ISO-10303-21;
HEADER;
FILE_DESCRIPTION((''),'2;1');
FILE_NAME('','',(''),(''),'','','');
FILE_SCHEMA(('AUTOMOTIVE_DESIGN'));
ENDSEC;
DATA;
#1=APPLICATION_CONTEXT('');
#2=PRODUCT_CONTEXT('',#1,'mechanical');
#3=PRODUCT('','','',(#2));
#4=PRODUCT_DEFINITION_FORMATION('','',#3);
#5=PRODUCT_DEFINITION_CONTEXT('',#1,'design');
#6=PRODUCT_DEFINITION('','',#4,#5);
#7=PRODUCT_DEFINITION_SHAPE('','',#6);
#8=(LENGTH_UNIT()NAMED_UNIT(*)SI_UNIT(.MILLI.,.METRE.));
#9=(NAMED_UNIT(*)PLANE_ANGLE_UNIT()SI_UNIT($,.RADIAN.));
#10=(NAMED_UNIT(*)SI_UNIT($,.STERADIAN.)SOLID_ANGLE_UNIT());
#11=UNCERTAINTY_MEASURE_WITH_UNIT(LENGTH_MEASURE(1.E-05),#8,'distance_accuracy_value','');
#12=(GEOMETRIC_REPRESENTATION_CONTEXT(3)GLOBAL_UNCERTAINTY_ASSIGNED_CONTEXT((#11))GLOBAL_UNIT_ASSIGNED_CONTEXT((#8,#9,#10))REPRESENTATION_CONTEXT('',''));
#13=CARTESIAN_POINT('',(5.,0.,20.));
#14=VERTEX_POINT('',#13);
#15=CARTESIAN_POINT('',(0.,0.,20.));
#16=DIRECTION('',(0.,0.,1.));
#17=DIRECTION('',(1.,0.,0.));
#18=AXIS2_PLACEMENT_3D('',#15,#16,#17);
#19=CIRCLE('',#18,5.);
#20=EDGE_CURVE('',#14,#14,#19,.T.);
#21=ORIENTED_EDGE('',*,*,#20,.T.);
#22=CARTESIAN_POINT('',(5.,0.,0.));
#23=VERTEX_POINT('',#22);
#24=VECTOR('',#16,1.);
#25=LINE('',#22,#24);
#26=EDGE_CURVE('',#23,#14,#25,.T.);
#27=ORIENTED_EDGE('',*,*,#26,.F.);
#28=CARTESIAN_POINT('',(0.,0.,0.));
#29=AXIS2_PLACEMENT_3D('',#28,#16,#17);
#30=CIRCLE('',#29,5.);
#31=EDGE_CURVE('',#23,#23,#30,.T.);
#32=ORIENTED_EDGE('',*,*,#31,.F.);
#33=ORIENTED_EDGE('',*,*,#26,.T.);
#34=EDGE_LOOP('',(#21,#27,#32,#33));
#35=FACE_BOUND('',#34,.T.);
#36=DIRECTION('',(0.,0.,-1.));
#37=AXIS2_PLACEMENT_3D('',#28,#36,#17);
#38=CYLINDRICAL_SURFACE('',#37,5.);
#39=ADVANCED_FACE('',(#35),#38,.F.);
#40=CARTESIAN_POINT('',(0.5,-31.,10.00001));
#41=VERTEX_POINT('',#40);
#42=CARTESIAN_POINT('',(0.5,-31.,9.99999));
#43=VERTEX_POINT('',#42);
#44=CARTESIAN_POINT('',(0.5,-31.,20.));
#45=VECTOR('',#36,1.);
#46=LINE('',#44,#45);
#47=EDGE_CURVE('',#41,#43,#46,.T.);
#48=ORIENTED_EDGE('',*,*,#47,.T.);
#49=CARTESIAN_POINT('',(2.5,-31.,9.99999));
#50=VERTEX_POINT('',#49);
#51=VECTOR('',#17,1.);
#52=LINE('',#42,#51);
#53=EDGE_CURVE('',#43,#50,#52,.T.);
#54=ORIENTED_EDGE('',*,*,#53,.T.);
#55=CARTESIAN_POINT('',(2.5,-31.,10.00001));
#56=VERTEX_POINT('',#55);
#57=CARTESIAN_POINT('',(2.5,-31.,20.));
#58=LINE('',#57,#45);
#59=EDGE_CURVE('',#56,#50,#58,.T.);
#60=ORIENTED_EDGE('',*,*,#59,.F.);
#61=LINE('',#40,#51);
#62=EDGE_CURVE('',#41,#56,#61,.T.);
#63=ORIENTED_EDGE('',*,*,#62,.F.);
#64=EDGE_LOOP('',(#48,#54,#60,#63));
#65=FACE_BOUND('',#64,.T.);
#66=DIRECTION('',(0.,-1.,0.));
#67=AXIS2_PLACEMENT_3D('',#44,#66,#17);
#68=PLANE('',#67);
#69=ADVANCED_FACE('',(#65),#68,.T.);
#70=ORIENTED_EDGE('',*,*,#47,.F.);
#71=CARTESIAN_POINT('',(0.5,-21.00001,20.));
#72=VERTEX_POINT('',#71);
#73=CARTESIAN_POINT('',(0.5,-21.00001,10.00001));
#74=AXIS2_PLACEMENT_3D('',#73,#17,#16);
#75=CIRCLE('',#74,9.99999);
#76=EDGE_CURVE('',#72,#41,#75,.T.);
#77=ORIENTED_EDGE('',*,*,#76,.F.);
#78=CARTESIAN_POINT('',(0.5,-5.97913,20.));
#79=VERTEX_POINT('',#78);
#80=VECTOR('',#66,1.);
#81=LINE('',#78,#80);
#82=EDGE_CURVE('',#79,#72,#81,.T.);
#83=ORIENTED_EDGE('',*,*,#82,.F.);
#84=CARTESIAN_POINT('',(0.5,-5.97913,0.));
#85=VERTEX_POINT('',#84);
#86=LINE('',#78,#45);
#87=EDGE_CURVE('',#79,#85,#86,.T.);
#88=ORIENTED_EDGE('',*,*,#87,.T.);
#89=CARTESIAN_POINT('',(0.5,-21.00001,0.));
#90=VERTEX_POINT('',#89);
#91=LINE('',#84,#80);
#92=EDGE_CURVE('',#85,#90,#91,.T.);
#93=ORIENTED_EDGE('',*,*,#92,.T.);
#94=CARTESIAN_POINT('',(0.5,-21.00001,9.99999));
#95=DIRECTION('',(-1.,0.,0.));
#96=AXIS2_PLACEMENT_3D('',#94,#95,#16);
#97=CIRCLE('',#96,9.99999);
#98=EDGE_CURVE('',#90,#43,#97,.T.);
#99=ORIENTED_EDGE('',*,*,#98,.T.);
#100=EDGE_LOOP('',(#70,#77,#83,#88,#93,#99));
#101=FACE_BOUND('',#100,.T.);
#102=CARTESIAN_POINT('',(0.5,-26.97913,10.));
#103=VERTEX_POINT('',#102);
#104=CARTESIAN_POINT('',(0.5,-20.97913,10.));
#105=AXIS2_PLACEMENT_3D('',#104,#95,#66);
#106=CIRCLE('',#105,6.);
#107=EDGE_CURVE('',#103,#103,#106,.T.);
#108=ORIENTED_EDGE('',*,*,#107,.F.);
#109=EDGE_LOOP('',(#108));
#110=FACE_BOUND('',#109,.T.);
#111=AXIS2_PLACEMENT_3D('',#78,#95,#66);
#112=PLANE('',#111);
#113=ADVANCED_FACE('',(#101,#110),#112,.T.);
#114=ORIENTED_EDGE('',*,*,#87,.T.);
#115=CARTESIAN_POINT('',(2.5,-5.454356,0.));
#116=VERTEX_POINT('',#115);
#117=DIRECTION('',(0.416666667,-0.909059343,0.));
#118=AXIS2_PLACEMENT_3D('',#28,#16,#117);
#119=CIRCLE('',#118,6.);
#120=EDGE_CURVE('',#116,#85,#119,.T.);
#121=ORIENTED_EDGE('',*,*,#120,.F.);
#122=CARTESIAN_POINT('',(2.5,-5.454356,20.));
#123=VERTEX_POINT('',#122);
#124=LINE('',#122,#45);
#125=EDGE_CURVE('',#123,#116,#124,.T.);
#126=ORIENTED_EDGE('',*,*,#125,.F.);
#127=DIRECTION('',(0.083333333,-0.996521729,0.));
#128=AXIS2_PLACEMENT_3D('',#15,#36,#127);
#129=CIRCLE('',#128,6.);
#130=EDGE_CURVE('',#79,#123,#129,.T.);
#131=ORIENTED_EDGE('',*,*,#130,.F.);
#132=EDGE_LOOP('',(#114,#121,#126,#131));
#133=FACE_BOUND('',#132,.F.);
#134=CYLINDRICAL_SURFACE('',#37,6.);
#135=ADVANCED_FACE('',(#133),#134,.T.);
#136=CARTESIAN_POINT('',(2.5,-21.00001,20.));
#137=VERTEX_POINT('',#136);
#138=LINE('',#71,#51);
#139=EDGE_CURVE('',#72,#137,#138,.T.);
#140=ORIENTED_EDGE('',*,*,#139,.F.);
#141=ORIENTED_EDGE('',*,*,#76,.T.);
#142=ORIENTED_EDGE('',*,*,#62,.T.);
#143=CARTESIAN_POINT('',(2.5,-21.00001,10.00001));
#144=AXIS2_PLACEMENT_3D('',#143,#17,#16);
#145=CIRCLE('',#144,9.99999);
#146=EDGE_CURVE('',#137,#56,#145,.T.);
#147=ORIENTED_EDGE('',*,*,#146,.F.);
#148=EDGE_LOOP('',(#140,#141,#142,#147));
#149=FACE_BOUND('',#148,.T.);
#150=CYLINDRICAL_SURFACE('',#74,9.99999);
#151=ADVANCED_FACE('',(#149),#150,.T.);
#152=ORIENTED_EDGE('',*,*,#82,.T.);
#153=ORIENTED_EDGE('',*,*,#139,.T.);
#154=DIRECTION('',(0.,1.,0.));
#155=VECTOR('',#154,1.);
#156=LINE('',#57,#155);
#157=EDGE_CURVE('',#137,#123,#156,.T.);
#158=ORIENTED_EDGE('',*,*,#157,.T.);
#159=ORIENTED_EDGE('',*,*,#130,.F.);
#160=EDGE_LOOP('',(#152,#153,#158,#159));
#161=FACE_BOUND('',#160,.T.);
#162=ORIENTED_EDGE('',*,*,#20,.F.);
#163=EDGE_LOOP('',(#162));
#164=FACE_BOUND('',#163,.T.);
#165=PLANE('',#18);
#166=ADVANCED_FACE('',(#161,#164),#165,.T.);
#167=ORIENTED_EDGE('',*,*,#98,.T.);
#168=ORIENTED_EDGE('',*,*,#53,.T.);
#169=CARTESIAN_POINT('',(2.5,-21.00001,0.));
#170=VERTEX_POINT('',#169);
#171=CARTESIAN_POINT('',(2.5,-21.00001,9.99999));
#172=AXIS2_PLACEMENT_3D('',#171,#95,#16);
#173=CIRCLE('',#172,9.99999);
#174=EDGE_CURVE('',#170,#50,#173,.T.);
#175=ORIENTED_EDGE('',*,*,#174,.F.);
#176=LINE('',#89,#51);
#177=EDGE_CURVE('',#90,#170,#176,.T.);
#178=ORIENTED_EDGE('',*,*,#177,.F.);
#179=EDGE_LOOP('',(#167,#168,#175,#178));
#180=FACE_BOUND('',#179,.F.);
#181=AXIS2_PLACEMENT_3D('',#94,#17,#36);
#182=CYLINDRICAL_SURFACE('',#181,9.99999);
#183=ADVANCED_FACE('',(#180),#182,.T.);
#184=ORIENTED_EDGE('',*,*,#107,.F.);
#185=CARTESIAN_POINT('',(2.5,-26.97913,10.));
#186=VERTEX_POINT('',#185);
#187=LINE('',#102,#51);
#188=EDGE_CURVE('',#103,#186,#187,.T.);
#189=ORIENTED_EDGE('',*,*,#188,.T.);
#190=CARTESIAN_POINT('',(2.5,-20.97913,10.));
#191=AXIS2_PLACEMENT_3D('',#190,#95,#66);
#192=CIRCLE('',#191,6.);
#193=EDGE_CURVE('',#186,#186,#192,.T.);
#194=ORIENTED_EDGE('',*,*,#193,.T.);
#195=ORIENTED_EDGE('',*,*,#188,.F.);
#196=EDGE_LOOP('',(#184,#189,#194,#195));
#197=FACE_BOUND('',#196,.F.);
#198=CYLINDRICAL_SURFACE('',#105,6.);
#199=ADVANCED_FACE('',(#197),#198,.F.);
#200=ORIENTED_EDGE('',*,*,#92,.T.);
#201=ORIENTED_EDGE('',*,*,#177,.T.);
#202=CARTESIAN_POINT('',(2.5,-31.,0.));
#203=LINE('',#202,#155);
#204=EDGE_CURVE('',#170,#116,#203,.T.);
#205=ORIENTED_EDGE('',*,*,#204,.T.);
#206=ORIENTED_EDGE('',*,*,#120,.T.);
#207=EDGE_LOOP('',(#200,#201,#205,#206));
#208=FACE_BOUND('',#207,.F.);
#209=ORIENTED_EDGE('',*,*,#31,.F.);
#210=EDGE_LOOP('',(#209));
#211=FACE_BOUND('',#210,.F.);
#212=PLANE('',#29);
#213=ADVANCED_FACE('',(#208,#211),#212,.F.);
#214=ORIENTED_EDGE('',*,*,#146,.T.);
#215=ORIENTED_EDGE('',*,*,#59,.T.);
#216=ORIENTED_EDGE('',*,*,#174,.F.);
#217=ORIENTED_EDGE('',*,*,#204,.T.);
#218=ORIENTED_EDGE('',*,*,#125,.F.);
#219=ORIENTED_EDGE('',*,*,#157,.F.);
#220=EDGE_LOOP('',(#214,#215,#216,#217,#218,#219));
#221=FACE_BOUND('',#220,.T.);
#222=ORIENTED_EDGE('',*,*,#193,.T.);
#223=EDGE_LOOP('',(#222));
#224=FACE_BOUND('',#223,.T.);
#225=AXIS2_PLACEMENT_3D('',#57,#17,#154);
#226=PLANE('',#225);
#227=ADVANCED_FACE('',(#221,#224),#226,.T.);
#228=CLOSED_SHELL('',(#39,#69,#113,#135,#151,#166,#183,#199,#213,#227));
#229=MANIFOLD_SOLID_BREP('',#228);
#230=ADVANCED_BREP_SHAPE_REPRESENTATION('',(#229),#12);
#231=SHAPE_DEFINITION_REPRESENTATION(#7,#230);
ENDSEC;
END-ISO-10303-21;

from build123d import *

# Parameters (mm, degrees)
F0_R     = 6
F0_R_2   = 5
F1_DEPTH = 20
F3_DEPTH = 20
F4_R     = 6
F5_DEPTH = 5.501
F6_R     = 9.99999


# Not quite as in the source:
# - a fillet or chamfer is up to 0.001 mm smaller than in the source, because OpenCascade refuses the exact size


with BuildPart() as f1:
    # F0 (on Top) → F1 (new body)
    with BuildSketch(Plane.XY):
        Circle(F0_R)
        Circle(F0_R_2, mode=Mode.SUBTRACT)
    extrude(amount=F1_DEPTH)

    # F2 (on face) → F3 (join)
    with BuildSketch(Plane.XY.offset(20)):
        with BuildLine():
            Line((0.5, -6), (0.5, -31))
            Line((0.5, -31), (2.5, -31))
            Line((2.5, -31), (2.5, -6))
            Line((2.5, -6), (2.5, -5.4543560573))
            ThreePointArc((2.5, -5.4543560573), (1.52277609, -5.8035465863), (0.5, -5.9791303716))
            Line((0.5, -5.9791303716), (0.5, -6))
        make_face()
    extrude(amount=-F3_DEPTH)

    # F4 (on face) → F5 (cut, through all)
    with BuildSketch(Plane(origin=(0.5, 0, 0), x_dir=(0, -1, 0), z_dir=(-1, 0, 0))):
        with Locations((20.9791303716, 10)):
            Circle(F4_R)
    extrude(amount=-F5_DEPTH, mode=Mode.SUBTRACT)

    # F6 (radius 10 in the source; OpenCascade refuses exactly that, so slightly less here)
    f6_edges = [f1.edges().sort_by_distance(p)[0] for p in [
        (1.5, -31, 20),
        (1.5, -31, 0),
    ]]
    fillet(f6_edges, radius=F6_R)


solid = f1.part
